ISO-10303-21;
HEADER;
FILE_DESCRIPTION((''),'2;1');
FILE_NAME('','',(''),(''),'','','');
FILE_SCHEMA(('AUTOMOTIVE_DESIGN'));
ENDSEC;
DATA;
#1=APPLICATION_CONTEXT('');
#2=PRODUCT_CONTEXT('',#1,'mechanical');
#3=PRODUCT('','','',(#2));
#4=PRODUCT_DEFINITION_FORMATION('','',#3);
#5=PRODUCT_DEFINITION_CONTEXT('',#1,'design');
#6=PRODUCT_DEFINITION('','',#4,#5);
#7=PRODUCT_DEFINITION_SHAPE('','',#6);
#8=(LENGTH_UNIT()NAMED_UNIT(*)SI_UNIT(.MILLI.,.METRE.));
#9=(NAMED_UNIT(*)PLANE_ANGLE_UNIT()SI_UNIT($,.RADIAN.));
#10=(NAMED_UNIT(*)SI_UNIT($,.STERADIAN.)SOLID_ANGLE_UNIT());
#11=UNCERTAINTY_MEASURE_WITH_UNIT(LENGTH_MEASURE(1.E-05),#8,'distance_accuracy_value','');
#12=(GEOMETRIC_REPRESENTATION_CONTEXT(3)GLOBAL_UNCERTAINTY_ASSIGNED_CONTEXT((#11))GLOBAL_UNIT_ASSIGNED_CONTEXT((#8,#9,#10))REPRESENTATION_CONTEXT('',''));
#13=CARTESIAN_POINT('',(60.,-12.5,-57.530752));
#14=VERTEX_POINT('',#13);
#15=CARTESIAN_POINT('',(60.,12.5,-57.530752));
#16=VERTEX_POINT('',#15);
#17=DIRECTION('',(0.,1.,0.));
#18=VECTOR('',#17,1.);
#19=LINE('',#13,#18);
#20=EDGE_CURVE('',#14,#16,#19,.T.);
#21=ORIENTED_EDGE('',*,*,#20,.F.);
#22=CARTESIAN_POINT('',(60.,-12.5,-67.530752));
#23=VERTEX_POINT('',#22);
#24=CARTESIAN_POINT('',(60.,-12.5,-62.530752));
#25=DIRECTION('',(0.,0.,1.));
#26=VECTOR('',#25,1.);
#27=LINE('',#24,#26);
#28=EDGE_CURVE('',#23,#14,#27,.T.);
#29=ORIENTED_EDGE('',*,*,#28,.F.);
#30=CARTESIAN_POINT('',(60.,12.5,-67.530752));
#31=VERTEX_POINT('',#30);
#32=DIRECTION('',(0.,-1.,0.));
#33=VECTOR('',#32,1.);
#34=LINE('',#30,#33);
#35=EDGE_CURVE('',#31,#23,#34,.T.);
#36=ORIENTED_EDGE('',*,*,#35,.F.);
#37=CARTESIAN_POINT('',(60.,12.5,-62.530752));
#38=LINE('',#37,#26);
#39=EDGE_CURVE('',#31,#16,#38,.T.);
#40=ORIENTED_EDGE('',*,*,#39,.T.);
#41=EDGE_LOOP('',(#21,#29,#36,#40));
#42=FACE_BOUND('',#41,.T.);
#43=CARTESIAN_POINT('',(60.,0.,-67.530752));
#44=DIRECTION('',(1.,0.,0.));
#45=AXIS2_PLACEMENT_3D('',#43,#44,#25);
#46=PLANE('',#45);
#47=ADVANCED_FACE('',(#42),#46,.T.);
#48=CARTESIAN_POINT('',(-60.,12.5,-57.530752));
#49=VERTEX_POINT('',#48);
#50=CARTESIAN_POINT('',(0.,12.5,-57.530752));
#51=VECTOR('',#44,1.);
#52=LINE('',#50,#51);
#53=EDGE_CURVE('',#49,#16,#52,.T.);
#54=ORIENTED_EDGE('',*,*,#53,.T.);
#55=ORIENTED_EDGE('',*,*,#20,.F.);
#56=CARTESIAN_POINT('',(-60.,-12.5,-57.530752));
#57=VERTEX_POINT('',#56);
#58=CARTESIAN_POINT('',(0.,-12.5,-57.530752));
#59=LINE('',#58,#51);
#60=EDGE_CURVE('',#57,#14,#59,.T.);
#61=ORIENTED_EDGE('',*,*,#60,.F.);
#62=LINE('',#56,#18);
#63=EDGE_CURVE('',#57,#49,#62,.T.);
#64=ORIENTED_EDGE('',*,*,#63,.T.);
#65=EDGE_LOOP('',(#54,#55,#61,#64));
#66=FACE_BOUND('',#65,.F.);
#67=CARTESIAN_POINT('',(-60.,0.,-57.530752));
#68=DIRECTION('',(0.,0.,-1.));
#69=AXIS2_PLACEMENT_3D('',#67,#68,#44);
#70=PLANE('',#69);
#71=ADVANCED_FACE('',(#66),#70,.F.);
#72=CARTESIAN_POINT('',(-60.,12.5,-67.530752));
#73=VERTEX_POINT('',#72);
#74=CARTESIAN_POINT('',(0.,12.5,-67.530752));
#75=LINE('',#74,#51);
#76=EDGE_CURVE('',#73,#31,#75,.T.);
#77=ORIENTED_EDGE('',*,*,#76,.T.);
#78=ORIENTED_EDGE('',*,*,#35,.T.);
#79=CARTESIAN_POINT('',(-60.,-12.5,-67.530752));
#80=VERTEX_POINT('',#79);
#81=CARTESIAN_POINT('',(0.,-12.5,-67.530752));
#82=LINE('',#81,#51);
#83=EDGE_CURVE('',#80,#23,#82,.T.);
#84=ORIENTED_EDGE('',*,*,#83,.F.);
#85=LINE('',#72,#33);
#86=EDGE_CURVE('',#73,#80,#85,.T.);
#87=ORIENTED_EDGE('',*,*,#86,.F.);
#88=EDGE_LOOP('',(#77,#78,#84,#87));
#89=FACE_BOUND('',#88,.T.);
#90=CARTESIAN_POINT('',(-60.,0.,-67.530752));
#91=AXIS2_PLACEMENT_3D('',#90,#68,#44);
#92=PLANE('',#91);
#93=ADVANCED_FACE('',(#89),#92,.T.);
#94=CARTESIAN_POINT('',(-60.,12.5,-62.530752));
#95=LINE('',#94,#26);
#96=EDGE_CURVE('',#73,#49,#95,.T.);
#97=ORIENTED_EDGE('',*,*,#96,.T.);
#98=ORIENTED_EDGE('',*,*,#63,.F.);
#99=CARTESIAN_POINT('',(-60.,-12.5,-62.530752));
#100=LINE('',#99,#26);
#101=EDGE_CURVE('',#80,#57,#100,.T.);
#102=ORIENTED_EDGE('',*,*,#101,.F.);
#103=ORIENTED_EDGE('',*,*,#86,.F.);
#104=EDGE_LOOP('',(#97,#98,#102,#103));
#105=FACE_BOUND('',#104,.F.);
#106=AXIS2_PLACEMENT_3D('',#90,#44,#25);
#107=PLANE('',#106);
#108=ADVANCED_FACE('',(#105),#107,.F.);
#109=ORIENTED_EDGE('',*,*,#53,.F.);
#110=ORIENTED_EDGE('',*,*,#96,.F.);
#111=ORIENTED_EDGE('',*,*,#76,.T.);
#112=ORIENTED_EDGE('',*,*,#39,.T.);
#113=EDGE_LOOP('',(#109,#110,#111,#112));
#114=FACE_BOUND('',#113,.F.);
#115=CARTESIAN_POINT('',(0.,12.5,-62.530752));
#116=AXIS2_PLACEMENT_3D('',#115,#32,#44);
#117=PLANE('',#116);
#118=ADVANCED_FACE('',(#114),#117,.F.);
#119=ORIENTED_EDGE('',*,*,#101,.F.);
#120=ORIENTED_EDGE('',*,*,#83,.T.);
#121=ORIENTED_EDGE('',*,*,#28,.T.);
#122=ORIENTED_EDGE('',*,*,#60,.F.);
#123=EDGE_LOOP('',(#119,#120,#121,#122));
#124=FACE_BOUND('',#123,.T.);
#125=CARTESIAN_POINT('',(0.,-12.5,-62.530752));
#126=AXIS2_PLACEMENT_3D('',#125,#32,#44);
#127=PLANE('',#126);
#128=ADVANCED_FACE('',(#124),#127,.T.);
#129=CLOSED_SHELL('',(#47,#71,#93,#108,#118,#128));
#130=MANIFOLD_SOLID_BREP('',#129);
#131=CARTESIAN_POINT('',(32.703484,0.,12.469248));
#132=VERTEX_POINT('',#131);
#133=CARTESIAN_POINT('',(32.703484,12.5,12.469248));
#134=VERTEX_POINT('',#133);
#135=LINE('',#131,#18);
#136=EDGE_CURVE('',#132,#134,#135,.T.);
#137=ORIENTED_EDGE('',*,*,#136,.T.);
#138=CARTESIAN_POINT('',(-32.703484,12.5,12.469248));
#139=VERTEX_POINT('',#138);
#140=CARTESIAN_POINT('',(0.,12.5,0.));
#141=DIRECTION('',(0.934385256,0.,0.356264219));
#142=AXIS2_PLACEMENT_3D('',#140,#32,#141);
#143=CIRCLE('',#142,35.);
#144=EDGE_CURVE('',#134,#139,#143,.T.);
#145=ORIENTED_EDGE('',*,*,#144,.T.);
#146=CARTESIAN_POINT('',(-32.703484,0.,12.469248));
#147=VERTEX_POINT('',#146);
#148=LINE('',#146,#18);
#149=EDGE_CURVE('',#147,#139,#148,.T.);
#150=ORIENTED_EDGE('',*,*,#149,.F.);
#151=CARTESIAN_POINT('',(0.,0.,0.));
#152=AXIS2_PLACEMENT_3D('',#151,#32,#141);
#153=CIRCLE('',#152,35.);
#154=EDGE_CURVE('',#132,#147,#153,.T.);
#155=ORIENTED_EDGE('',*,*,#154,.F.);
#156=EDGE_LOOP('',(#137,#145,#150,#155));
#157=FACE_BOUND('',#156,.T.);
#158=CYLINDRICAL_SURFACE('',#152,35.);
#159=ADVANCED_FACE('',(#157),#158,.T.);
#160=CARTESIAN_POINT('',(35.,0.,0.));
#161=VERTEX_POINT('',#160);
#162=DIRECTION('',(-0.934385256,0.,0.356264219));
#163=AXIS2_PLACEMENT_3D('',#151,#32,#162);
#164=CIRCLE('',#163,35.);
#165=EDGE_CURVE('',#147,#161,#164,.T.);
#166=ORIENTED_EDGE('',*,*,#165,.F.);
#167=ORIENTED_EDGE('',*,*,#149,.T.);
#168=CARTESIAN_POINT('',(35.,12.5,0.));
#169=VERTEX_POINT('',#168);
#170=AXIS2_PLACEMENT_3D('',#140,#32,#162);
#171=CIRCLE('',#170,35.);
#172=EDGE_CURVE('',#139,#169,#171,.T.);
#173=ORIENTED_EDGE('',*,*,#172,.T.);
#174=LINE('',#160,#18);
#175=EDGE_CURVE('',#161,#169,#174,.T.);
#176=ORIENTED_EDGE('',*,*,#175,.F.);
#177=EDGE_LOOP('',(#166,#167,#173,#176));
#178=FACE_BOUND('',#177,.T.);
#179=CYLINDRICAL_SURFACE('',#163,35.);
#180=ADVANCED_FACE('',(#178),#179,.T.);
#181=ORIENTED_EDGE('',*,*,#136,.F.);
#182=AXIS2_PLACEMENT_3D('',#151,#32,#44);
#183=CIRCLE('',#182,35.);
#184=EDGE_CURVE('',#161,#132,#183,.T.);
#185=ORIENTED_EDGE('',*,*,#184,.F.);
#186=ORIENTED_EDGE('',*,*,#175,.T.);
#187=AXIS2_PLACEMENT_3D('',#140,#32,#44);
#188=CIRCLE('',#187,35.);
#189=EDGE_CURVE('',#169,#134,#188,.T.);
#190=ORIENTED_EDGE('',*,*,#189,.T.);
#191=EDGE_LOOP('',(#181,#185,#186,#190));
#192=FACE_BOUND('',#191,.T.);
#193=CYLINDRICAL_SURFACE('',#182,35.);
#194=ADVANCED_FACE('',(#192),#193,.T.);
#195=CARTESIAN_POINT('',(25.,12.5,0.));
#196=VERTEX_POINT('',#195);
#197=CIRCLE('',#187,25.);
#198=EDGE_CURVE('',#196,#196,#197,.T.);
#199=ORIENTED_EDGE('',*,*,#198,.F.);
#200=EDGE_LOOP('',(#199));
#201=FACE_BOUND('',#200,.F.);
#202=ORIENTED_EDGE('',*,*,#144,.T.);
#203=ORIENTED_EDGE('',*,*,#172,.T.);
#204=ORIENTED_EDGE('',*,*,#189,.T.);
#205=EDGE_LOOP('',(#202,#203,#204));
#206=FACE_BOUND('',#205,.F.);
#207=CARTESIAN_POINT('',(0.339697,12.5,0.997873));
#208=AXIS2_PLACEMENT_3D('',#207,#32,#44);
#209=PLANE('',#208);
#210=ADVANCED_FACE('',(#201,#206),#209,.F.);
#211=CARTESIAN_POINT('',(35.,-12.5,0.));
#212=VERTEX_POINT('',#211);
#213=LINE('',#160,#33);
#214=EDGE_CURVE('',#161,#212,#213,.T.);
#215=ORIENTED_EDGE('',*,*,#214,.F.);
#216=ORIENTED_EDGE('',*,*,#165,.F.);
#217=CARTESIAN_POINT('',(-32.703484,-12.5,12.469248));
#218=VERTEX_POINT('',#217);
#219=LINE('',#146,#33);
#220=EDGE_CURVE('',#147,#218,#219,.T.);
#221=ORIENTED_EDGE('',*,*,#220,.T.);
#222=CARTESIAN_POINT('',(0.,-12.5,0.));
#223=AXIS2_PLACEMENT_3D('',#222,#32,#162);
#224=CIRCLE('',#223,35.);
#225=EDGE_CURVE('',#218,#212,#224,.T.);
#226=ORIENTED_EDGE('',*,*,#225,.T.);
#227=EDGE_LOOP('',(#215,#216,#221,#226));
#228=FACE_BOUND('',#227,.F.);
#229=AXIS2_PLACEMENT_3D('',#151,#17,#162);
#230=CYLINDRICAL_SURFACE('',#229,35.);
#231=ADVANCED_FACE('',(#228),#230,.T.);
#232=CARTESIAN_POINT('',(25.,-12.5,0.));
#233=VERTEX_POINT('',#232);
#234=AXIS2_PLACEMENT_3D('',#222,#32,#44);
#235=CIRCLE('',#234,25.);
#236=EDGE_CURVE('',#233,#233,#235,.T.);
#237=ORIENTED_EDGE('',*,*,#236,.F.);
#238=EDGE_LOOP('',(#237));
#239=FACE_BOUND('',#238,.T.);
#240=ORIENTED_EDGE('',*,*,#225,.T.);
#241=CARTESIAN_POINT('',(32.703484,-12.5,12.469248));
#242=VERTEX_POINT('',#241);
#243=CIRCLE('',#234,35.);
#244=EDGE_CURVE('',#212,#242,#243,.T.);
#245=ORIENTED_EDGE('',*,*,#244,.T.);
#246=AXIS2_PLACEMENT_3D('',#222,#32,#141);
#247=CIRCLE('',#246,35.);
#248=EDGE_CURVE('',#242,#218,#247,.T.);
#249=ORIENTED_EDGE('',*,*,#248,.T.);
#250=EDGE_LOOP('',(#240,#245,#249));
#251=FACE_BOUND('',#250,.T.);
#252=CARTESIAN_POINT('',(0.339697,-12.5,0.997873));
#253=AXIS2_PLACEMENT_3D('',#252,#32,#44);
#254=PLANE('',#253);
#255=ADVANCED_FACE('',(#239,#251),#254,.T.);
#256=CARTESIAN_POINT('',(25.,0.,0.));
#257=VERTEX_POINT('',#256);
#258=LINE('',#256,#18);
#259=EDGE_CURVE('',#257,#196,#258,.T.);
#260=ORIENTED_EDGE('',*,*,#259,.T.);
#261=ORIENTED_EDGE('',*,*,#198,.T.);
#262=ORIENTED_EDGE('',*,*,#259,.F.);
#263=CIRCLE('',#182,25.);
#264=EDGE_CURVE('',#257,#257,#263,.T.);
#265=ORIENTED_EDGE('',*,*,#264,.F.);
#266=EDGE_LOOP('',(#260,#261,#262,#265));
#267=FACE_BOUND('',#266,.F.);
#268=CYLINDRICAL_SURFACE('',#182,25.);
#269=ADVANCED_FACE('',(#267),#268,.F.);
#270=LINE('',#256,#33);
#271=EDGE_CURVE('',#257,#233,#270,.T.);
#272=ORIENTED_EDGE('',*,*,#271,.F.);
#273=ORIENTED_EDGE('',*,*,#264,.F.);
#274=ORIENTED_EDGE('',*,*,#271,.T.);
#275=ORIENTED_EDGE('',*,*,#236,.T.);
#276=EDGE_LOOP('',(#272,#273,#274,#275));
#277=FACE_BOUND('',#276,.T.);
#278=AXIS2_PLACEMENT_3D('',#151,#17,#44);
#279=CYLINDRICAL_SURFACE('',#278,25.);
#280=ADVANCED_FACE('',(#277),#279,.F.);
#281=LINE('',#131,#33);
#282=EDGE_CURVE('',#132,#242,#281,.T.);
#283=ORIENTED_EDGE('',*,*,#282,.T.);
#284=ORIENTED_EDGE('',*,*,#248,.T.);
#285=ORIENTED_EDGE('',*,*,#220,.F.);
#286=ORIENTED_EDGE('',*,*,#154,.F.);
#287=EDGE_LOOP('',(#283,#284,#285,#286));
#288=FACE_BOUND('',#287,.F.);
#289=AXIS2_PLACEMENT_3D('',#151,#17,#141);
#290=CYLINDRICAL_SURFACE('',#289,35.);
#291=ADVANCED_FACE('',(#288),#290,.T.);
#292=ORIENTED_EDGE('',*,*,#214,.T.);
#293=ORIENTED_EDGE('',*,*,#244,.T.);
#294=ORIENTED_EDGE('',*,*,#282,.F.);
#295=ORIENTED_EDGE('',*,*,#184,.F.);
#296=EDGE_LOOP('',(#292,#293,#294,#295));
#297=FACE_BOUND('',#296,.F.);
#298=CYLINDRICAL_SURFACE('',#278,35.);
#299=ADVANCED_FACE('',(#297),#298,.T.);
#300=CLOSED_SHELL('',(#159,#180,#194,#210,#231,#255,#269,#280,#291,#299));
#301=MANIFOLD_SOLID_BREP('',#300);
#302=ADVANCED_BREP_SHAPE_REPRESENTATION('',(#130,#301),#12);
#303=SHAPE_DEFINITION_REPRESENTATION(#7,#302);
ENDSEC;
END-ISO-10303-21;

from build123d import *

# Parameters (mm, degrees)
F0_R     = 25
F1_DEPTH = 12.5
F0_W     = 120
F0_H     = 10


# Not quite as in the source:
# - a feature names something its author has since deleted; it is built from what else it names


with BuildPart() as f1:
    # F0 (on Front) → F1 (new body, symmetric)
    with BuildSketch(Plane.XZ):
        with BuildLine():
            ThreePointArc((-32.7034839498, 12.4692476737), (-6.3394819094, -34.4210832067), (35, 0))
            ThreePointArc((35, 0), (34.4210832067, 6.3394819094), (32.7034839498, 12.4692476737))
            ThreePointArc((32.7034839498, 12.4692476737), (0, 35), (-32.7034839498, 12.4692476737))
        make_face()
        Circle(F0_R, mode=Mode.SUBTRACT)
    extrude(amount=F1_DEPTH, both=True)


with BuildPart() as f1b:
    # F0 (on Front) → F1, piece 2 (new body, symmetric)
    with BuildSketch(Plane.XZ):
        with Locations((0, -62.5307523263)):
            Rectangle(F0_W, F0_H)
    extrude(amount=F1_DEPTH, both=True)


solid = Compound([f1.part, f1b.part])
